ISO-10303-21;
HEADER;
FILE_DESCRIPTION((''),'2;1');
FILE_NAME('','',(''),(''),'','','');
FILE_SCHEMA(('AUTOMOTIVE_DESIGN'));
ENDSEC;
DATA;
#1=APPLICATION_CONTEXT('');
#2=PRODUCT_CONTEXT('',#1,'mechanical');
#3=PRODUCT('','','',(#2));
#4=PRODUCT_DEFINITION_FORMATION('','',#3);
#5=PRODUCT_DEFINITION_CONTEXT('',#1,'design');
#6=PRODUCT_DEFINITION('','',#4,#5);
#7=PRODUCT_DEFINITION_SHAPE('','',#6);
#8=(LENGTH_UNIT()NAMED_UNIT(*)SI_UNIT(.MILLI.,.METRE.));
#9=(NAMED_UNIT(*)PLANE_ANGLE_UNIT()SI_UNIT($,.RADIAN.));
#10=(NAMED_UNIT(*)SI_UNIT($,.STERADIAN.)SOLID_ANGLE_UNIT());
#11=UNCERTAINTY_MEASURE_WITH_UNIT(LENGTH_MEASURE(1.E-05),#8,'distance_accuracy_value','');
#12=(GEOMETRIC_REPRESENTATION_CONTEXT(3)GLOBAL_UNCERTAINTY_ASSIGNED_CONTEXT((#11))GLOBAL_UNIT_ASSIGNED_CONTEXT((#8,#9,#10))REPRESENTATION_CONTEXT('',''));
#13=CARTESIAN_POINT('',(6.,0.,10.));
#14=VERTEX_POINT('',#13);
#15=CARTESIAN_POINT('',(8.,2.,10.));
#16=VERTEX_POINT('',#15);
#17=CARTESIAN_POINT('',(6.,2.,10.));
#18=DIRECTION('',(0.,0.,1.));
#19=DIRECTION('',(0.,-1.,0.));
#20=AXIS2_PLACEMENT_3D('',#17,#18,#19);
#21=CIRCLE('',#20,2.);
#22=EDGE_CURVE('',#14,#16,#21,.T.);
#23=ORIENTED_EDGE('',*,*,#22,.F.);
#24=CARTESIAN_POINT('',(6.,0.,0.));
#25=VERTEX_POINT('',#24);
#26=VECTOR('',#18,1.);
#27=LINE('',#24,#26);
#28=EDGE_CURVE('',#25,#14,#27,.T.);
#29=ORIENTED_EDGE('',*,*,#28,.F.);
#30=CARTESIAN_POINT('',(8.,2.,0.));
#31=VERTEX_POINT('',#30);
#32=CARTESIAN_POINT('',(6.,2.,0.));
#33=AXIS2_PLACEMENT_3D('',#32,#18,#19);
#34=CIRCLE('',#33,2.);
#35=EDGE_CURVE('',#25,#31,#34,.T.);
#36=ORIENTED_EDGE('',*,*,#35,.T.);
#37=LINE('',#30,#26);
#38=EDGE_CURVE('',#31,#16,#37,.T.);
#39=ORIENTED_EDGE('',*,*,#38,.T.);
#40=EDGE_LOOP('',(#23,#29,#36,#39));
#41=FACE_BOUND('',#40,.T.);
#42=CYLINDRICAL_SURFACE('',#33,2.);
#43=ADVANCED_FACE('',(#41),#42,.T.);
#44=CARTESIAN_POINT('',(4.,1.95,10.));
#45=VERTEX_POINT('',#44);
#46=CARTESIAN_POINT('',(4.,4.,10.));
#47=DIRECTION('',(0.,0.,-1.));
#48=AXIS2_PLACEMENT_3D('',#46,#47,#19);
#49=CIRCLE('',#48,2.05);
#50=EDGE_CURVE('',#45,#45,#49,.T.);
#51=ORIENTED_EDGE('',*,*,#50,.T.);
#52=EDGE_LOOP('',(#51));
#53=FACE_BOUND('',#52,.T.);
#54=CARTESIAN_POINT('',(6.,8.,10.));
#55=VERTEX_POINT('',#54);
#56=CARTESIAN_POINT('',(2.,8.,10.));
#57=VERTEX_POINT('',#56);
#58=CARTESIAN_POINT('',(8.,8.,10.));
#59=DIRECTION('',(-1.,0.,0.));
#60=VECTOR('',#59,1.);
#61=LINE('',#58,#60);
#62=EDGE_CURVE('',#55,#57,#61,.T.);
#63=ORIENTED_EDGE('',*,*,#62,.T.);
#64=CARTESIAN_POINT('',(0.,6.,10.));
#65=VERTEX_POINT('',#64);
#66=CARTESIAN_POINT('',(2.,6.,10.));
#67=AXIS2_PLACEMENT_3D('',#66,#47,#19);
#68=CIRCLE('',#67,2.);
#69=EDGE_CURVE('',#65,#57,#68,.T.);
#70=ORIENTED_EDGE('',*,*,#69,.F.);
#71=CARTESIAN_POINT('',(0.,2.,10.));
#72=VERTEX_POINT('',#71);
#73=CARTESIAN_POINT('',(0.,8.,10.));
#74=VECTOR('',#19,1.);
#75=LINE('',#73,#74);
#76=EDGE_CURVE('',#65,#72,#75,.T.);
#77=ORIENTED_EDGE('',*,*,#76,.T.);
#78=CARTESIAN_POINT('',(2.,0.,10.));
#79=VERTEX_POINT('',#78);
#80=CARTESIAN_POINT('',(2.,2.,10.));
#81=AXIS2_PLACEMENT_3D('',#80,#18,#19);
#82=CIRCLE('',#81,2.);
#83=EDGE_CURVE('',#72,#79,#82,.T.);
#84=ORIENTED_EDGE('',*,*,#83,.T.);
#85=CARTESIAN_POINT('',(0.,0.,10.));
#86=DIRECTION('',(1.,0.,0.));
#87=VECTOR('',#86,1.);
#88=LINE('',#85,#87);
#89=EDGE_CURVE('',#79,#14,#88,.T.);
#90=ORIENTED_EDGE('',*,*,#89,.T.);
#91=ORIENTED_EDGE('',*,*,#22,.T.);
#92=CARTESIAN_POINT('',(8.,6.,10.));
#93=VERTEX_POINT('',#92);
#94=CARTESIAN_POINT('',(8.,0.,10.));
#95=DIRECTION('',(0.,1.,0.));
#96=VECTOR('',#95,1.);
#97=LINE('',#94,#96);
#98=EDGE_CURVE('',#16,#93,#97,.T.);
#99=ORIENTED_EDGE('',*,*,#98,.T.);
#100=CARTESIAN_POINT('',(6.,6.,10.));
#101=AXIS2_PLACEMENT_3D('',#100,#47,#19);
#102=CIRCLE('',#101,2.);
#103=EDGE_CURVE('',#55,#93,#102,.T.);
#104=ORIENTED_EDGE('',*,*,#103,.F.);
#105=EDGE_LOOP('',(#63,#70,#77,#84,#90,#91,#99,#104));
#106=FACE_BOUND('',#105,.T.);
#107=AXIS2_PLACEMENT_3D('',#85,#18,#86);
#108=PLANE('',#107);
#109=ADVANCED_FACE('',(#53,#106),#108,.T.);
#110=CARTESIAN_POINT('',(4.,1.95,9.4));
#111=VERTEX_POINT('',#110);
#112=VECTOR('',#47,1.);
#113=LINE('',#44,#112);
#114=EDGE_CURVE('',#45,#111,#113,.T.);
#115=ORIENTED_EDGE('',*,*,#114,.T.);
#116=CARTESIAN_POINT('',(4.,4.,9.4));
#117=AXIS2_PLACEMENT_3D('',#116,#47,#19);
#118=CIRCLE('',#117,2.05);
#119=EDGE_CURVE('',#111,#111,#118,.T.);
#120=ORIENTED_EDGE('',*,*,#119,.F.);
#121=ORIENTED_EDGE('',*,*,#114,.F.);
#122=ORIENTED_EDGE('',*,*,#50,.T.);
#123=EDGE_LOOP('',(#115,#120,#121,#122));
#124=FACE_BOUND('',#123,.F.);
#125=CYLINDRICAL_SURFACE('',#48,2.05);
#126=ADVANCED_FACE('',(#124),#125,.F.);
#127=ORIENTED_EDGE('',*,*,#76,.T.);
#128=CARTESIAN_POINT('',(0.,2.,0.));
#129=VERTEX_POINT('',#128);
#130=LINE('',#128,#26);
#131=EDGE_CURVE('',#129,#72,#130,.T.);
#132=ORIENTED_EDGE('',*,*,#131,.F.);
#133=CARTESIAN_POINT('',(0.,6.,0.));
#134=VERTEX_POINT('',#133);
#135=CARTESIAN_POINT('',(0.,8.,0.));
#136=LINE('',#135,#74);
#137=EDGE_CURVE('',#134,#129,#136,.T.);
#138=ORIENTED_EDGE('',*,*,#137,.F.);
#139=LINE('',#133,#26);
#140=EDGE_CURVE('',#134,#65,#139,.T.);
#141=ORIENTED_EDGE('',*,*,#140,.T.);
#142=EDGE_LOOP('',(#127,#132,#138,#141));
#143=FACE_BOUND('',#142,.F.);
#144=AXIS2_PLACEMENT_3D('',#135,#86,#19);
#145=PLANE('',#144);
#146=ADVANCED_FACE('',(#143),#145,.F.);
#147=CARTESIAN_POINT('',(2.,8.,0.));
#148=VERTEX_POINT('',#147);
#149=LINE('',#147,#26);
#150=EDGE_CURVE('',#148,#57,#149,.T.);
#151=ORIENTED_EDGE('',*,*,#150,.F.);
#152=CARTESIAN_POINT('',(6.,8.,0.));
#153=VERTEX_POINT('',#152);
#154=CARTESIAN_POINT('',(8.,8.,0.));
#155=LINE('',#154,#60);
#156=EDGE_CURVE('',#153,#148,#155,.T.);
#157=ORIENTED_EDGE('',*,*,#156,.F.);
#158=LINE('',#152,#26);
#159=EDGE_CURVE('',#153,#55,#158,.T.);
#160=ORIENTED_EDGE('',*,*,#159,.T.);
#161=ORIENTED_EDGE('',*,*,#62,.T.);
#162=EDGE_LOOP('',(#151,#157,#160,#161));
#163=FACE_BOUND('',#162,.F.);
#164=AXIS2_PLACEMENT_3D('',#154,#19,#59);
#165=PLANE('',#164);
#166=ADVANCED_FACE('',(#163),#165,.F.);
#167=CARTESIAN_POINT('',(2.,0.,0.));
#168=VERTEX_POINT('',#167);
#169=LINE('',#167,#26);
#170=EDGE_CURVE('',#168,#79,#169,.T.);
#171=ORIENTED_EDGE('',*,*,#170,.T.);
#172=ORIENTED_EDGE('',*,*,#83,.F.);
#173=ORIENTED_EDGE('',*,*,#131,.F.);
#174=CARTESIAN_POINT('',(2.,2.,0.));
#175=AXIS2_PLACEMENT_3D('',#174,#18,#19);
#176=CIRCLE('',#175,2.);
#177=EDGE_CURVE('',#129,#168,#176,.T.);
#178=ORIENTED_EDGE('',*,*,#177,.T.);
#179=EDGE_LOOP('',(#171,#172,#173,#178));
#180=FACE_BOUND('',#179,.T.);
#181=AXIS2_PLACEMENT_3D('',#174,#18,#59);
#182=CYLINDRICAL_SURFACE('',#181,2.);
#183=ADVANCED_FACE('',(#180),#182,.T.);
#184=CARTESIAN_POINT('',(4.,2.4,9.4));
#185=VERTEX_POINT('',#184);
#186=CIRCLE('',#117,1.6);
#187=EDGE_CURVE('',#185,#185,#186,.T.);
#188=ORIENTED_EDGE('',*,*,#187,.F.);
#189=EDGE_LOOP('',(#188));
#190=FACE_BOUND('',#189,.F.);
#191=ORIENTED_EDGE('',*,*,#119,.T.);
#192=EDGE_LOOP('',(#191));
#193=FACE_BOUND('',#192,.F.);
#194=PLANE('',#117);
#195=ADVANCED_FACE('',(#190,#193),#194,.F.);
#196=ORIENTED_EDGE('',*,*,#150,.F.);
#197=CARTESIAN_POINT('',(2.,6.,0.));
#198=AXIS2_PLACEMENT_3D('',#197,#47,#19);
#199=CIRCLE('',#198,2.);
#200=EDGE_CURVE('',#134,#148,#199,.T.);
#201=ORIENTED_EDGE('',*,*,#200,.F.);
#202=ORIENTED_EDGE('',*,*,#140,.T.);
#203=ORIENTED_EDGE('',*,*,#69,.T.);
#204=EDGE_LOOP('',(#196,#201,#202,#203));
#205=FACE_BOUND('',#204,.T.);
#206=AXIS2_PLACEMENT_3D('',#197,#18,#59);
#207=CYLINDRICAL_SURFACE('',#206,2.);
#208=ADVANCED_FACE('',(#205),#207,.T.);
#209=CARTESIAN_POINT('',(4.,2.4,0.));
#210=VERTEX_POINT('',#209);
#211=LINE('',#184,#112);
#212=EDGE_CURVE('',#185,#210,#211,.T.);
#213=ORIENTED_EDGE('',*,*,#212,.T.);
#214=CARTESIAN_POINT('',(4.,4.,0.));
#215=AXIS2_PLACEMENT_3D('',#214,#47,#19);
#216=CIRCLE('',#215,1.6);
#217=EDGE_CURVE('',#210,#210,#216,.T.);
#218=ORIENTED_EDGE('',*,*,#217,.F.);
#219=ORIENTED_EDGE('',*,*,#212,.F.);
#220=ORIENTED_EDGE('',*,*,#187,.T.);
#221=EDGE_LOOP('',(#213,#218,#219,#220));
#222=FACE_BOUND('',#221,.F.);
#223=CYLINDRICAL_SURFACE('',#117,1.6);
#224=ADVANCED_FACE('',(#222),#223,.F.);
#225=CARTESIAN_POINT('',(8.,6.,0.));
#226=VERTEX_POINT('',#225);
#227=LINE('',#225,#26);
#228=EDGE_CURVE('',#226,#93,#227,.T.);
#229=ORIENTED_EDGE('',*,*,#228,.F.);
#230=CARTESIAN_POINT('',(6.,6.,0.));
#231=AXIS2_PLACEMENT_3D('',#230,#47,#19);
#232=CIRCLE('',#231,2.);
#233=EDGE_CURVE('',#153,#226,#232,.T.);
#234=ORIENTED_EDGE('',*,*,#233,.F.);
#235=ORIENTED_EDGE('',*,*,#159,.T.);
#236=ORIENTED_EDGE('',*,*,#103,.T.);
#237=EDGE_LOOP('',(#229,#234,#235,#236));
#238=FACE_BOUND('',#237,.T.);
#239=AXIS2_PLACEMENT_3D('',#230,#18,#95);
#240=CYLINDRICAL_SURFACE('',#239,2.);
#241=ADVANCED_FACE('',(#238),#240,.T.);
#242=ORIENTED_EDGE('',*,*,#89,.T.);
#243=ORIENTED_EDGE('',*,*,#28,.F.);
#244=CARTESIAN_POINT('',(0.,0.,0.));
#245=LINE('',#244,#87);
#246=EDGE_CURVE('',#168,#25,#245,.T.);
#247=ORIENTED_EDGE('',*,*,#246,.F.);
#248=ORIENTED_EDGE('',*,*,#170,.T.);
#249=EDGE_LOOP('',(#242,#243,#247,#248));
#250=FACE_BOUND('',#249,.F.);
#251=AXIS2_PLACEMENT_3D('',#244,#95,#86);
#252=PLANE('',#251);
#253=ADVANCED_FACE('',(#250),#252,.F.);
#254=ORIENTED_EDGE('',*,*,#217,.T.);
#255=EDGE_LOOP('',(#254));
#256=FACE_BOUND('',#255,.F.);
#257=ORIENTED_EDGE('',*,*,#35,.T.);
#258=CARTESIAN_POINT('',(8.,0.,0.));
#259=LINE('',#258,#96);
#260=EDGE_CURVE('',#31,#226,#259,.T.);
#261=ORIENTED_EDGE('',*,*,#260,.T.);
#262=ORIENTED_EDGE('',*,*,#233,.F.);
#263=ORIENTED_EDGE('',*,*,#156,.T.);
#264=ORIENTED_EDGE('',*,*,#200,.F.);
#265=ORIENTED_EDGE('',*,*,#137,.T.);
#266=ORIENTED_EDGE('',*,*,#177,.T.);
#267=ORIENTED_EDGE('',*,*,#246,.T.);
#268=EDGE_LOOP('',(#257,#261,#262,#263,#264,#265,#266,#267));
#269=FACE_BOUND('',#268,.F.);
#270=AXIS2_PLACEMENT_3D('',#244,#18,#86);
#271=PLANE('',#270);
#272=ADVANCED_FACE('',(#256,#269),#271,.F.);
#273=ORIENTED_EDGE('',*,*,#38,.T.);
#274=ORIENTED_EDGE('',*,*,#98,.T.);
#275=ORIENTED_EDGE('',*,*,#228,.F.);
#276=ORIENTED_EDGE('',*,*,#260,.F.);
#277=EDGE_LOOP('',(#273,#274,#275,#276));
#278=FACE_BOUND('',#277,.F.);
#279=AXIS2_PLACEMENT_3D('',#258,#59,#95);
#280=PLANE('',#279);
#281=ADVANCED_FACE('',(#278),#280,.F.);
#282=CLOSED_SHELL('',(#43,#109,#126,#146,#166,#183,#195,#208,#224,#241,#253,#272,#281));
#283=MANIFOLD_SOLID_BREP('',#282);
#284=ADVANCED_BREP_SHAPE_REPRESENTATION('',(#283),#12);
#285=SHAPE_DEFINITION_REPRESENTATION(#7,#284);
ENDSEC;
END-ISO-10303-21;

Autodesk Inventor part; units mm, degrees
ref_plane "YZ Plane" through (0, 0, 0) normal (1, 0, 0) x (0, 1, 0)
ref_plane "XZ Plane" through (0, 0, 0) normal (0, 1, 0) x (-1, 0, 0)
ref_plane "XY Plane" through (0, 0, 0) normal (0, 0, 1) x (1, 0, 0)
sketch "Sketch2" plane through (0, 0, 0) normal (0, 0, 1) x (1, 0, 0)
  line L0 (0, 0) -> (8, 0)
  line L1 (8, 0) -> (8, 8)
  line L2 (8, 8) -> (0, 8)
  line L3 (0, 8) -> (0, 0)
  point P0 (4, 4)
  dimension "d2" = 8
  dimension "d3" = 8
extrude "Extrusion1" add sketch "Sketch2" along normal blind 10
sketch "Sketch3" plane through (0, 0, 10) normal (0, 0, 1) x (1, 0, 0)
  point P0 (0, 0)
  point P1 (4, 4)
hole "Hole1" at (4, 4, 10) direction (0, 0, -1) diameter 3.2 depth 10 counterbore diameter 4.1 counterbore depth 0.6
fillet "Fillet1" radius 2 4 edges at (8, 8, 5) (0, 8, 5) (8, 0, 5) (0, 0, 5)
properties part number "Insert Test"
